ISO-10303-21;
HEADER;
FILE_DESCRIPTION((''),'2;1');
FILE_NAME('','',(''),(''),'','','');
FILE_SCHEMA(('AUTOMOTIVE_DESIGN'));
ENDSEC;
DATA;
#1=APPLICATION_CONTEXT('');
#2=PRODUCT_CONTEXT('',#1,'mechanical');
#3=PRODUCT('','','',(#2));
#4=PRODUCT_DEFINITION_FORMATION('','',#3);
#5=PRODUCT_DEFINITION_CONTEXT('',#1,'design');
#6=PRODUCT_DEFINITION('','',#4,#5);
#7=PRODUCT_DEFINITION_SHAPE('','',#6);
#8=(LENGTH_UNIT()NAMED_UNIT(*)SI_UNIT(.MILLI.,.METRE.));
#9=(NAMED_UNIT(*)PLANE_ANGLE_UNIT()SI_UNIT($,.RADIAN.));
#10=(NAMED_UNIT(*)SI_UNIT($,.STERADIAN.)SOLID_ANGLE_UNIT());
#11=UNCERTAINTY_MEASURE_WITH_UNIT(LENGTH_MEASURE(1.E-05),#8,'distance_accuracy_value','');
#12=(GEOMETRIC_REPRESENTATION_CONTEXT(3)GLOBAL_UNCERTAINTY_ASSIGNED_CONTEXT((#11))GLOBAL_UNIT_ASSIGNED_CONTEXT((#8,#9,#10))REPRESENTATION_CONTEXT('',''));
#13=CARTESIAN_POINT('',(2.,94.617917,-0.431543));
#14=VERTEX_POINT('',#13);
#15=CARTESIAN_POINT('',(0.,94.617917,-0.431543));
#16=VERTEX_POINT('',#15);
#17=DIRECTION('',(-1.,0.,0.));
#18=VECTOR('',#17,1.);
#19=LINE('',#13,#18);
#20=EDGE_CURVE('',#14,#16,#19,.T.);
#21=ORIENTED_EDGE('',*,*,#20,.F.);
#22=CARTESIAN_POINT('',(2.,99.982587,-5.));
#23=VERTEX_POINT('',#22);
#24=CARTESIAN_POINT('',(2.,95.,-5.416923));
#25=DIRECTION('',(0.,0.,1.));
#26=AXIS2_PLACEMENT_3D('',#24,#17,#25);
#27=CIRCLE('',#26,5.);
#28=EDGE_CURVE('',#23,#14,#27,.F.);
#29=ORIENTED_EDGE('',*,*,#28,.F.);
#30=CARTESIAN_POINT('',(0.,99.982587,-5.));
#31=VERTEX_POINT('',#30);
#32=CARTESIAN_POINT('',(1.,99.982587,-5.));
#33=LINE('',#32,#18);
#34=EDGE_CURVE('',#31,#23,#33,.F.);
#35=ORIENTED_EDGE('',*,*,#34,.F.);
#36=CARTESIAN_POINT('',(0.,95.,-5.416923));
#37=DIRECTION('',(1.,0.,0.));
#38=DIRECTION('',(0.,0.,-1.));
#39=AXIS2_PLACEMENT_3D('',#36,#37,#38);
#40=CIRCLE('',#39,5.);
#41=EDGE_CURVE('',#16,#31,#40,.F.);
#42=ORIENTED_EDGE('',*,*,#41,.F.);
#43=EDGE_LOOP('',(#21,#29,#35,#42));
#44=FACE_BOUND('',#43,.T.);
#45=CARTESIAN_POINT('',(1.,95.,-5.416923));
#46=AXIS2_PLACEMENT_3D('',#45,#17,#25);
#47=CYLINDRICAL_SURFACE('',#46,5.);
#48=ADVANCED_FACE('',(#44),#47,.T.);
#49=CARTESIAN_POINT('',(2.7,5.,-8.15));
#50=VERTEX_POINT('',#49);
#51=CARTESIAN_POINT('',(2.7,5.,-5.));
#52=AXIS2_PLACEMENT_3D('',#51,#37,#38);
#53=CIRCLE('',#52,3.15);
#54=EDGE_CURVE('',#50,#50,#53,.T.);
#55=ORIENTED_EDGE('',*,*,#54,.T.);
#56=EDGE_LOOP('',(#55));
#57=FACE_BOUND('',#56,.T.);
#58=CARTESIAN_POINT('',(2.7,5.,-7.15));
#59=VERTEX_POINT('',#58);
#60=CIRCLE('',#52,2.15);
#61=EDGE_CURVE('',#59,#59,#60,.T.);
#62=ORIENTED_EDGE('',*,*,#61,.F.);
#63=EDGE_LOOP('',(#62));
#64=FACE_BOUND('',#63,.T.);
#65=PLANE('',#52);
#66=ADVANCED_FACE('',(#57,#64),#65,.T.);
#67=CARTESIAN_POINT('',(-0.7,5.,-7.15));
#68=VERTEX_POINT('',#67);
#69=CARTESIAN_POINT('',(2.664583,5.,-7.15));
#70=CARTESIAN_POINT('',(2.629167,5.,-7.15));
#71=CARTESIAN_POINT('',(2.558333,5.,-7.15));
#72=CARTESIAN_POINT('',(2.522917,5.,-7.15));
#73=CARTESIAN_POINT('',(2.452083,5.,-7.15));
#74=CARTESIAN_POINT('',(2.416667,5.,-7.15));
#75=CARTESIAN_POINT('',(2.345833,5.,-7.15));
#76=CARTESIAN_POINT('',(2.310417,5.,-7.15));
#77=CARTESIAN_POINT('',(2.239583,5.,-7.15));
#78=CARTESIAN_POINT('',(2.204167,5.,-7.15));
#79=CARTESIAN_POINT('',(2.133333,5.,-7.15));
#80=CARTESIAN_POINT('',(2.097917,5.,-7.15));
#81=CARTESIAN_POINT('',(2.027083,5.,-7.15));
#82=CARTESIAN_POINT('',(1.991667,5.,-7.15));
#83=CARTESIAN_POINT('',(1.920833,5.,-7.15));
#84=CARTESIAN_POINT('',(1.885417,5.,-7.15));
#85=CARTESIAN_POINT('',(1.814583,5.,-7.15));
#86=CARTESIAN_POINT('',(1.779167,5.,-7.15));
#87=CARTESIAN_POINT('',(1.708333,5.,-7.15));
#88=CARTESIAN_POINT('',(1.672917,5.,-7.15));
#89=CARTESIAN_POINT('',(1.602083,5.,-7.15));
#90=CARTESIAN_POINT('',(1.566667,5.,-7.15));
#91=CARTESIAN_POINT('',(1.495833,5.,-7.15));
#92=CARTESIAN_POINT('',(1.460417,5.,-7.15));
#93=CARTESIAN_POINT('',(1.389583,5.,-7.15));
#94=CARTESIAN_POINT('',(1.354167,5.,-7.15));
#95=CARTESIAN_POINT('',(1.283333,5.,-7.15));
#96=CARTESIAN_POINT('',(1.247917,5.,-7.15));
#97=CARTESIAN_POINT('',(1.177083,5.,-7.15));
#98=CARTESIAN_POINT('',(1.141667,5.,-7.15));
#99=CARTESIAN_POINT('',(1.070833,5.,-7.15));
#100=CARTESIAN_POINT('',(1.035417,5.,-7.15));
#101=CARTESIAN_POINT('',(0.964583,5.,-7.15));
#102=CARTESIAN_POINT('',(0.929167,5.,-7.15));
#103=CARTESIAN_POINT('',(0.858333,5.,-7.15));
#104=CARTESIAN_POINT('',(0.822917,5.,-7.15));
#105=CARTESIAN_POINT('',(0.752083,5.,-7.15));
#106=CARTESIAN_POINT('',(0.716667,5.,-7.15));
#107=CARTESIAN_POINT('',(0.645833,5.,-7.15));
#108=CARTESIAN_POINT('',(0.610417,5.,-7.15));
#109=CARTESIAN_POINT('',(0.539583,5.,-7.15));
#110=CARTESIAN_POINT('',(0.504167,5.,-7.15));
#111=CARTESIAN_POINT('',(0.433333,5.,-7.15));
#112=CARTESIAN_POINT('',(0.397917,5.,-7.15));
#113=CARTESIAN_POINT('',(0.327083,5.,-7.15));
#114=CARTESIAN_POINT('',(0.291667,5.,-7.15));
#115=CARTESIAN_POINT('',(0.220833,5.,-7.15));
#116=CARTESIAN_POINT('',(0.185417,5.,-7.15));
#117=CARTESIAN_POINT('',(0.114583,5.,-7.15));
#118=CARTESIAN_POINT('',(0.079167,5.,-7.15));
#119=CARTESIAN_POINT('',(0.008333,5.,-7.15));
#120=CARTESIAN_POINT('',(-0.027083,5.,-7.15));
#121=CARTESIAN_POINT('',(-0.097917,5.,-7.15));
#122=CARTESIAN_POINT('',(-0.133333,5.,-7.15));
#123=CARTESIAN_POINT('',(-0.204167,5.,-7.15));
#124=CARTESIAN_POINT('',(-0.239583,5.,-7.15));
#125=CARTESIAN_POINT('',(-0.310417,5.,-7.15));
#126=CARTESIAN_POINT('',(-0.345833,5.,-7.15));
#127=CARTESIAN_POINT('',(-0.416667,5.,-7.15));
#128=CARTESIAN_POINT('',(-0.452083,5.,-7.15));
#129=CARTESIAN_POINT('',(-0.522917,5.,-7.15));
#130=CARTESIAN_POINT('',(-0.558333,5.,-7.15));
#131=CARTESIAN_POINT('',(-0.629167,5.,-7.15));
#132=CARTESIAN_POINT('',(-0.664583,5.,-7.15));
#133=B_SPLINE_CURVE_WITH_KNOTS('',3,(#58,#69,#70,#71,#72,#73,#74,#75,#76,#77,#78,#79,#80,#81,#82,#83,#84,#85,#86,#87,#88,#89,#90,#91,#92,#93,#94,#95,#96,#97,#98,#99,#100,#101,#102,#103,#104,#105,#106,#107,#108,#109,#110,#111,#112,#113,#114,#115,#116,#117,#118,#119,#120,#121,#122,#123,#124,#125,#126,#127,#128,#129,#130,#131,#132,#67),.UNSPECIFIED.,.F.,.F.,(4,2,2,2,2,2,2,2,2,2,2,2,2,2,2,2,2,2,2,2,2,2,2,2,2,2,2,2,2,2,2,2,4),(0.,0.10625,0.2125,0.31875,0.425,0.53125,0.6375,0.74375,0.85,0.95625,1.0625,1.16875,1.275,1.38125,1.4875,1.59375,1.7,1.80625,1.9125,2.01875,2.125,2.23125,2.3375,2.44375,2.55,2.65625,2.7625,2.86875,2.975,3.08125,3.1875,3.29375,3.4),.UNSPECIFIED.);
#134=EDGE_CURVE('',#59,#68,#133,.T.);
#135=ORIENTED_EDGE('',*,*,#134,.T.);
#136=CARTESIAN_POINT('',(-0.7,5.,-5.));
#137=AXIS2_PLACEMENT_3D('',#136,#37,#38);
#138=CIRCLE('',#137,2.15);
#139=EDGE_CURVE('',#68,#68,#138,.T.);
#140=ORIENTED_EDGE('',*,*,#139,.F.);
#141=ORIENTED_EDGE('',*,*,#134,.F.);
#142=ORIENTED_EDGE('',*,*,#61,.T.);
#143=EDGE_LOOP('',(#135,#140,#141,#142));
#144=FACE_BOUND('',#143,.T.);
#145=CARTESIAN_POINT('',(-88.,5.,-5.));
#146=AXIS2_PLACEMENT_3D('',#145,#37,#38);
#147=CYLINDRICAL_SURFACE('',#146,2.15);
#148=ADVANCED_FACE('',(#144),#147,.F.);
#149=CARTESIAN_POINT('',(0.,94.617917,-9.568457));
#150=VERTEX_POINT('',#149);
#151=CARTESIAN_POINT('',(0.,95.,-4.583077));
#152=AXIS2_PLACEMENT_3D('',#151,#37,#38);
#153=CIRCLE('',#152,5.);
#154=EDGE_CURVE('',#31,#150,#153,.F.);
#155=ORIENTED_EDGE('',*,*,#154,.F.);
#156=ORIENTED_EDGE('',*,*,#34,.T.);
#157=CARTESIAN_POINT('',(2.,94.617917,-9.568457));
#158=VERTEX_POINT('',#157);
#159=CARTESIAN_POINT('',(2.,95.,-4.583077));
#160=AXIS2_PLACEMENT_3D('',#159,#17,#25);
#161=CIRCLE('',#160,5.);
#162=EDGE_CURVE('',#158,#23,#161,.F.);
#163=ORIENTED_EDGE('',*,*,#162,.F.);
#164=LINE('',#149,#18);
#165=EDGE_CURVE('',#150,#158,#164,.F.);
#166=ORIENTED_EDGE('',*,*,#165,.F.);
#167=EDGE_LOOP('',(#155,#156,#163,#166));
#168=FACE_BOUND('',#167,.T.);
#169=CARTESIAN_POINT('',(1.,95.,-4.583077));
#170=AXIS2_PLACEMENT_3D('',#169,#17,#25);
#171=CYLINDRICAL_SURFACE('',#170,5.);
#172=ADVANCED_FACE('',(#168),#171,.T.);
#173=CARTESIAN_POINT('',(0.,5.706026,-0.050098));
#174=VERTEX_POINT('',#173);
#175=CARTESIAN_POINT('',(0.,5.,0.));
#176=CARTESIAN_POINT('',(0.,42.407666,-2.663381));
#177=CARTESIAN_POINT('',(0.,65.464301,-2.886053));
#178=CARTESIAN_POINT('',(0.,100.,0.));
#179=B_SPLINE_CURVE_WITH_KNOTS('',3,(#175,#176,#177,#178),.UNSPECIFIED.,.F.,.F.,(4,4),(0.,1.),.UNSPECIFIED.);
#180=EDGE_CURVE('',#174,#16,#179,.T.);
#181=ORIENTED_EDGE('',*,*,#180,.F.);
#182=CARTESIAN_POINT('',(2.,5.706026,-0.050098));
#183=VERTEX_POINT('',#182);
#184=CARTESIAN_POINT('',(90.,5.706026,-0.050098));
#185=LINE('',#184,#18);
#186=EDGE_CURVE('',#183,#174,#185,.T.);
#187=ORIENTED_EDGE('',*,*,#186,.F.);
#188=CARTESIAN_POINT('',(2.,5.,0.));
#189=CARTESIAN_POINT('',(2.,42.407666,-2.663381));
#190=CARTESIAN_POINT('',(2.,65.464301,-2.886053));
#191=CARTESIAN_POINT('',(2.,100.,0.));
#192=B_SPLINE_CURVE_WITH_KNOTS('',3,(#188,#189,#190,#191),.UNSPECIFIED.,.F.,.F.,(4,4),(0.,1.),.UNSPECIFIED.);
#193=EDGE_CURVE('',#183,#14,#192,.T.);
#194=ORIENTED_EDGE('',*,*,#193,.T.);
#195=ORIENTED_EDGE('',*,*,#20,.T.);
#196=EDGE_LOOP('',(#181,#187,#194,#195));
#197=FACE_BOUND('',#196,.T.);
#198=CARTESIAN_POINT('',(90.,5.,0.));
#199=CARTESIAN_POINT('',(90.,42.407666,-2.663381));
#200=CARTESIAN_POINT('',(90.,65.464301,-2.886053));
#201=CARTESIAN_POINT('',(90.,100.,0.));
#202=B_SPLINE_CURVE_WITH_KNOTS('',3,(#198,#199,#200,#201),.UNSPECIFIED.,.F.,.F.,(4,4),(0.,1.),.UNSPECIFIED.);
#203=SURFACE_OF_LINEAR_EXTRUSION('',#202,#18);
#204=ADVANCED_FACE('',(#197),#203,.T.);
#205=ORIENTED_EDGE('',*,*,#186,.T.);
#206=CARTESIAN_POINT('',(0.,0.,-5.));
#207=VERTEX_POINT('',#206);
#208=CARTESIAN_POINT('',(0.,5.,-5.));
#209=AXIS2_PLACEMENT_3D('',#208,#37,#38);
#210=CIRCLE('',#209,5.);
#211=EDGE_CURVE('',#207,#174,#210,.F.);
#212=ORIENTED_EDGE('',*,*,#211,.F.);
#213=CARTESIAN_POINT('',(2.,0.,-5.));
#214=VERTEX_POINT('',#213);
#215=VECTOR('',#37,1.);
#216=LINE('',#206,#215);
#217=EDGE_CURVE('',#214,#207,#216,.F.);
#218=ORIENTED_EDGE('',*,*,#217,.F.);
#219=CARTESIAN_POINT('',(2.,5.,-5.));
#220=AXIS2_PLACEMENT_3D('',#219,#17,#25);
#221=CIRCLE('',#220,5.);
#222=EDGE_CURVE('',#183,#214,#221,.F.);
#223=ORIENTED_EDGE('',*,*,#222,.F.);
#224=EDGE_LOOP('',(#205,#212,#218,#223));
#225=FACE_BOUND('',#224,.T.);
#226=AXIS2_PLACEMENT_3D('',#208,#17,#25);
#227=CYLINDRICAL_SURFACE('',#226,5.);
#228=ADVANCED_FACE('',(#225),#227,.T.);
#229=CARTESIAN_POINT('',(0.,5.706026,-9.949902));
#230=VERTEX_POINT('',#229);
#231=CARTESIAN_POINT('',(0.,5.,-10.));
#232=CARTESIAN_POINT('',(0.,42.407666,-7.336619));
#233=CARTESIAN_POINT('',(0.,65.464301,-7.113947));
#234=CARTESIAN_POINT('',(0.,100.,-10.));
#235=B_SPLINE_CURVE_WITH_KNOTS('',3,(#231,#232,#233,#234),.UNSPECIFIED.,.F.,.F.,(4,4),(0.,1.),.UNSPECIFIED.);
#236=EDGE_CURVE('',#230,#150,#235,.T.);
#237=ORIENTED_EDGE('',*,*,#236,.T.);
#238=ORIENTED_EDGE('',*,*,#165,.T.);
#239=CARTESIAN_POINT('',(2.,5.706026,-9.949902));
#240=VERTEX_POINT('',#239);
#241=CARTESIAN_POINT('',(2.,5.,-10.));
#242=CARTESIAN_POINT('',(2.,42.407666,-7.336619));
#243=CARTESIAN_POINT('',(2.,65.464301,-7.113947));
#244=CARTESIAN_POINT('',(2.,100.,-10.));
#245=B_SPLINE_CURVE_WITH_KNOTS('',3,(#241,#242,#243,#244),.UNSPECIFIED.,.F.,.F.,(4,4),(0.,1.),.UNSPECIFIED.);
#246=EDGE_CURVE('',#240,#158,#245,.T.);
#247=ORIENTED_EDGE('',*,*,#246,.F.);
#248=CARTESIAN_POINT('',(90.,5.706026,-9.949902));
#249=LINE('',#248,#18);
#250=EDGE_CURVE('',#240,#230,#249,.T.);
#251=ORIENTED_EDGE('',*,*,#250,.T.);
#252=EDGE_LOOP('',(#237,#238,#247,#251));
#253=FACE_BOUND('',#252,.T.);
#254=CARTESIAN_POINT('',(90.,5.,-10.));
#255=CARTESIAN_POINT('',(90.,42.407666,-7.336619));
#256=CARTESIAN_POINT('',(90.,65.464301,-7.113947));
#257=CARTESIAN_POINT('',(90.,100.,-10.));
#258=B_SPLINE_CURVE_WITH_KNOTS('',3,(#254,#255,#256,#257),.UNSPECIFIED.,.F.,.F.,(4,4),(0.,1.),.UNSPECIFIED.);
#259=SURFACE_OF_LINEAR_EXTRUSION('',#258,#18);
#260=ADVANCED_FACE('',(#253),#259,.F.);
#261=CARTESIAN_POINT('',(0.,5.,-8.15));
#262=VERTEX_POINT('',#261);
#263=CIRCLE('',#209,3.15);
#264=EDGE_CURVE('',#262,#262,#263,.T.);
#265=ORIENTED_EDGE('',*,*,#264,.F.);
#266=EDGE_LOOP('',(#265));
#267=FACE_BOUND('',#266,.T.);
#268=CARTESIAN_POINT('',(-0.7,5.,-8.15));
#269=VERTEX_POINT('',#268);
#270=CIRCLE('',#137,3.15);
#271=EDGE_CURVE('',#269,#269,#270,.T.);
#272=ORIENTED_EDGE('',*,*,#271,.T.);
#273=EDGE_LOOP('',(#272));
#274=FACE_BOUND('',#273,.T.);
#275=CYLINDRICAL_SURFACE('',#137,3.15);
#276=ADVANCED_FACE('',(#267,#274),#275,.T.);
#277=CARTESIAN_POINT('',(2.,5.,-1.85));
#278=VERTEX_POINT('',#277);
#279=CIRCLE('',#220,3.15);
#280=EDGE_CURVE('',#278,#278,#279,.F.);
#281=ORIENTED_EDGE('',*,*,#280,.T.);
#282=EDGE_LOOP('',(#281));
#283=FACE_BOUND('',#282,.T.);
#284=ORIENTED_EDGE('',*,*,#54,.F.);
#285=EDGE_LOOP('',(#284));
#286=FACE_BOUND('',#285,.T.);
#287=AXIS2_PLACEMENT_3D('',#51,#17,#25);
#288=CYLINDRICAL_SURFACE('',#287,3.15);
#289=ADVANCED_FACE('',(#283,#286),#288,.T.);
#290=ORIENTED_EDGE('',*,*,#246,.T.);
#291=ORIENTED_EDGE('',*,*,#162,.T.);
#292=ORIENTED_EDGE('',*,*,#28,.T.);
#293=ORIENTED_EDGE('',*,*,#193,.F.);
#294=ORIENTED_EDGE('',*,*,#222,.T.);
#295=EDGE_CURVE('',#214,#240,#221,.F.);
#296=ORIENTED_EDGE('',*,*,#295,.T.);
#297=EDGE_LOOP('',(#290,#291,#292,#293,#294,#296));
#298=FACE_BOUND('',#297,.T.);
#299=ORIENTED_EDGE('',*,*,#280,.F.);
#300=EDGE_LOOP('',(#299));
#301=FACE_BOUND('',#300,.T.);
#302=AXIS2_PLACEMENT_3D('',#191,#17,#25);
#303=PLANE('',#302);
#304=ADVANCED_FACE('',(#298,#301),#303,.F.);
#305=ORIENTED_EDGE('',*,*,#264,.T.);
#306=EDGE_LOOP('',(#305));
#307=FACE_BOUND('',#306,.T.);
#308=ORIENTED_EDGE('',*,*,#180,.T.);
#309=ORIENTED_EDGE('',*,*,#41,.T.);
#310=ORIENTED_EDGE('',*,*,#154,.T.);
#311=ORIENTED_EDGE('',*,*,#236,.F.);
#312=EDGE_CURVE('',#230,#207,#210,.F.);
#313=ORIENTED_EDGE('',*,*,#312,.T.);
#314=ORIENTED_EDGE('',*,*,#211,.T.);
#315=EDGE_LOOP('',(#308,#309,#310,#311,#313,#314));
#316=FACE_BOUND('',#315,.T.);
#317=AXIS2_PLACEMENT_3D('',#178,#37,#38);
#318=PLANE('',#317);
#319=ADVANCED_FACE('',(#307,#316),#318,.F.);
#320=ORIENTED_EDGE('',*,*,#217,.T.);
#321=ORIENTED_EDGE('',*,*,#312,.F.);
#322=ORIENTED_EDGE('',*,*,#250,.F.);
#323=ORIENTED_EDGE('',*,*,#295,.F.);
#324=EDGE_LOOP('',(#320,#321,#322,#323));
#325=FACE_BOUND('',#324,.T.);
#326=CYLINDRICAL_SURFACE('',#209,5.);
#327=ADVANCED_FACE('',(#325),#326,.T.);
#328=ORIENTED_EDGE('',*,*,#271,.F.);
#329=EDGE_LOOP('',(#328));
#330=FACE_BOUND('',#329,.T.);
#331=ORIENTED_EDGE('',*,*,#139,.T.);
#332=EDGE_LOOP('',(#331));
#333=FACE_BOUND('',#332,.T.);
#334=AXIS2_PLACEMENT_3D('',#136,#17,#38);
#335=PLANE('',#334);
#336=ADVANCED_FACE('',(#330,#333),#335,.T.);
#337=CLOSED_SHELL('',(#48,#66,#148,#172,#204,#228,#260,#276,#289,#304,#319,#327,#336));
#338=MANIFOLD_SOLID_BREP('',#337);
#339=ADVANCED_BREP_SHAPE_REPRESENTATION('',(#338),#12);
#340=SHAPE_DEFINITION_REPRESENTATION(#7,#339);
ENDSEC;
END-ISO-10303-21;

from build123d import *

# Parameters (mm, degrees)
SKETCH1_W           = 2
SKETCH1_H           = 10
BOSS_EXTRUDE1_DEPTH = 100
SKETCH3_R           = 2.15
CUT_EXTRUDE1_DEPTH  = 90
FILLET1_R           = 5
CUT_EXTRUDE2_DEPTH  = 90
FILLET2_R           = 5
BOSS_EXTRUDE2_START = 0.7
SKETCH5_R           = 3.15
SKETCH5_R_2         = 2.15
BOSS_EXTRUDE2_DEPTH = 0.7


# Some blends are built 0.0001 mm under size
with BuildPart() as part:
    # Sketch1 → Boss-Extrude1 (new body)
    with BuildSketch(Plane(origin=(0, 0, 0), x_dir=(1, 0, 0), z_dir=(0, 1, 0))):
        with Locations((1, 5)):
            Rectangle(SKETCH1_W, SKETCH1_H)
    extrude(amount=BOSS_EXTRUDE1_DEPTH)

    # Sketch3 → Cut-Extrude1 (cut)
    with BuildSketch(Plane(origin=(2, 0, 0), x_dir=(0, 0, -1), z_dir=(1, 0, 0))):
        with Locations((5, 5)):
            Circle(SKETCH3_R)
    extrude(amount=-CUT_EXTRUDE1_DEPTH, mode=Mode.SUBTRACT)

    # Fillet1
    fillet1_edges = [part.edges().sort_by_distance(p)[0] for p in [
        (1, 0, -10),
        (1, 0, 0),
    ]]
    fillet(fillet1_edges, radius=FILLET1_R - 0.0001)  # a hair under: the kernel refuses the full size

    # Sketch4 → Cut-Extrude2 (cut)
    with BuildSketch(Plane.ZY):
        with BuildLine():
            add(Edge.make_bspline(
                [(-10, 5), (-7.336619142, 42.407665675), (-7.11394722, 65.464300782), (-10, 100)],
                knots=[0, 0, 0, 0, 1, 1, 1, 1], degree=3))
            Line((-10, 100), (-10, 5))
        make_face()
        with BuildLine():
            add(Edge.make_bspline(
                [(0, 5), (-2.663380858, 42.407665675), (-2.88605278, 65.464300782), (0, 100)],
                knots=[0, 0, 0, 0, 1, 1, 1, 1], degree=3))
            Line((0, 100), (0, 5))
        make_face()
    extrude(amount=-CUT_EXTRUDE2_DEPTH, mode=Mode.SUBTRACT)

    # Fillet2
    # the kernel refuses this fillet: 5 mm, written as the material it takes off along each edge
    with BuildSketch(Plane(origin=(2, 100, -10), x_dir=(0, -0.9968008899824262, 0.07992487554099316), z_dir=(-1, 0, 0)), Plane(origin=(0, 100, 0), x_dir=(0, -0.9968008899824262, -0.07992487554099297), z_dir=(1, 0, 0))) as fillet2_piece_1:
        with BuildLine():
            CenterArc((5.416951327, 4.999969042), FILLET2_R, 175.415752406, 94.382624457)
            Line((0.432946877, 5.39959342), (0.333266788, 5.407585907))
            Line((0.333266788, 5.407585907), (-0.099680089, 0.007992488))
            Line((-0.099680089, 0.007992488), (0.000336329, -0.099999434))
            ThreePointArc((0.000336329, -0.099999434), (2.699681925, -0.095355708), (5.399004527, -0.099999381))
            Line((5.399004527, -0.099999381), (5.399356425, 0))
        make_face()
    extrude(amount=2, mode=Mode.SUBTRACT)

    # Sketch5 → Boss-Extrude2 (add)
    with BuildSketch(Plane(origin=(2, 0, 0), x_dir=(0, 0, -1), z_dir=(1, 0, 0)).offset(BOSS_EXTRUDE2_START)):
        with Locations(Location((5, 5, 0), (0, 0, 180))):
            Circle(SKETCH5_R)
        with Locations((5, 5)):
            Circle(SKETCH5_R_2, mode=Mode.SUBTRACT)
    boss_extrude2 = extrude(amount=-BOSS_EXTRUDE2_DEPTH)

    # Mirror1: Boss-Extrude2 across plane
    add(boss_extrude2.mirror(Plane(origin=(1, 0, 0), x_dir=(0, 0, 1), z_dir=(1, 0, 0))))


solid = part.part
